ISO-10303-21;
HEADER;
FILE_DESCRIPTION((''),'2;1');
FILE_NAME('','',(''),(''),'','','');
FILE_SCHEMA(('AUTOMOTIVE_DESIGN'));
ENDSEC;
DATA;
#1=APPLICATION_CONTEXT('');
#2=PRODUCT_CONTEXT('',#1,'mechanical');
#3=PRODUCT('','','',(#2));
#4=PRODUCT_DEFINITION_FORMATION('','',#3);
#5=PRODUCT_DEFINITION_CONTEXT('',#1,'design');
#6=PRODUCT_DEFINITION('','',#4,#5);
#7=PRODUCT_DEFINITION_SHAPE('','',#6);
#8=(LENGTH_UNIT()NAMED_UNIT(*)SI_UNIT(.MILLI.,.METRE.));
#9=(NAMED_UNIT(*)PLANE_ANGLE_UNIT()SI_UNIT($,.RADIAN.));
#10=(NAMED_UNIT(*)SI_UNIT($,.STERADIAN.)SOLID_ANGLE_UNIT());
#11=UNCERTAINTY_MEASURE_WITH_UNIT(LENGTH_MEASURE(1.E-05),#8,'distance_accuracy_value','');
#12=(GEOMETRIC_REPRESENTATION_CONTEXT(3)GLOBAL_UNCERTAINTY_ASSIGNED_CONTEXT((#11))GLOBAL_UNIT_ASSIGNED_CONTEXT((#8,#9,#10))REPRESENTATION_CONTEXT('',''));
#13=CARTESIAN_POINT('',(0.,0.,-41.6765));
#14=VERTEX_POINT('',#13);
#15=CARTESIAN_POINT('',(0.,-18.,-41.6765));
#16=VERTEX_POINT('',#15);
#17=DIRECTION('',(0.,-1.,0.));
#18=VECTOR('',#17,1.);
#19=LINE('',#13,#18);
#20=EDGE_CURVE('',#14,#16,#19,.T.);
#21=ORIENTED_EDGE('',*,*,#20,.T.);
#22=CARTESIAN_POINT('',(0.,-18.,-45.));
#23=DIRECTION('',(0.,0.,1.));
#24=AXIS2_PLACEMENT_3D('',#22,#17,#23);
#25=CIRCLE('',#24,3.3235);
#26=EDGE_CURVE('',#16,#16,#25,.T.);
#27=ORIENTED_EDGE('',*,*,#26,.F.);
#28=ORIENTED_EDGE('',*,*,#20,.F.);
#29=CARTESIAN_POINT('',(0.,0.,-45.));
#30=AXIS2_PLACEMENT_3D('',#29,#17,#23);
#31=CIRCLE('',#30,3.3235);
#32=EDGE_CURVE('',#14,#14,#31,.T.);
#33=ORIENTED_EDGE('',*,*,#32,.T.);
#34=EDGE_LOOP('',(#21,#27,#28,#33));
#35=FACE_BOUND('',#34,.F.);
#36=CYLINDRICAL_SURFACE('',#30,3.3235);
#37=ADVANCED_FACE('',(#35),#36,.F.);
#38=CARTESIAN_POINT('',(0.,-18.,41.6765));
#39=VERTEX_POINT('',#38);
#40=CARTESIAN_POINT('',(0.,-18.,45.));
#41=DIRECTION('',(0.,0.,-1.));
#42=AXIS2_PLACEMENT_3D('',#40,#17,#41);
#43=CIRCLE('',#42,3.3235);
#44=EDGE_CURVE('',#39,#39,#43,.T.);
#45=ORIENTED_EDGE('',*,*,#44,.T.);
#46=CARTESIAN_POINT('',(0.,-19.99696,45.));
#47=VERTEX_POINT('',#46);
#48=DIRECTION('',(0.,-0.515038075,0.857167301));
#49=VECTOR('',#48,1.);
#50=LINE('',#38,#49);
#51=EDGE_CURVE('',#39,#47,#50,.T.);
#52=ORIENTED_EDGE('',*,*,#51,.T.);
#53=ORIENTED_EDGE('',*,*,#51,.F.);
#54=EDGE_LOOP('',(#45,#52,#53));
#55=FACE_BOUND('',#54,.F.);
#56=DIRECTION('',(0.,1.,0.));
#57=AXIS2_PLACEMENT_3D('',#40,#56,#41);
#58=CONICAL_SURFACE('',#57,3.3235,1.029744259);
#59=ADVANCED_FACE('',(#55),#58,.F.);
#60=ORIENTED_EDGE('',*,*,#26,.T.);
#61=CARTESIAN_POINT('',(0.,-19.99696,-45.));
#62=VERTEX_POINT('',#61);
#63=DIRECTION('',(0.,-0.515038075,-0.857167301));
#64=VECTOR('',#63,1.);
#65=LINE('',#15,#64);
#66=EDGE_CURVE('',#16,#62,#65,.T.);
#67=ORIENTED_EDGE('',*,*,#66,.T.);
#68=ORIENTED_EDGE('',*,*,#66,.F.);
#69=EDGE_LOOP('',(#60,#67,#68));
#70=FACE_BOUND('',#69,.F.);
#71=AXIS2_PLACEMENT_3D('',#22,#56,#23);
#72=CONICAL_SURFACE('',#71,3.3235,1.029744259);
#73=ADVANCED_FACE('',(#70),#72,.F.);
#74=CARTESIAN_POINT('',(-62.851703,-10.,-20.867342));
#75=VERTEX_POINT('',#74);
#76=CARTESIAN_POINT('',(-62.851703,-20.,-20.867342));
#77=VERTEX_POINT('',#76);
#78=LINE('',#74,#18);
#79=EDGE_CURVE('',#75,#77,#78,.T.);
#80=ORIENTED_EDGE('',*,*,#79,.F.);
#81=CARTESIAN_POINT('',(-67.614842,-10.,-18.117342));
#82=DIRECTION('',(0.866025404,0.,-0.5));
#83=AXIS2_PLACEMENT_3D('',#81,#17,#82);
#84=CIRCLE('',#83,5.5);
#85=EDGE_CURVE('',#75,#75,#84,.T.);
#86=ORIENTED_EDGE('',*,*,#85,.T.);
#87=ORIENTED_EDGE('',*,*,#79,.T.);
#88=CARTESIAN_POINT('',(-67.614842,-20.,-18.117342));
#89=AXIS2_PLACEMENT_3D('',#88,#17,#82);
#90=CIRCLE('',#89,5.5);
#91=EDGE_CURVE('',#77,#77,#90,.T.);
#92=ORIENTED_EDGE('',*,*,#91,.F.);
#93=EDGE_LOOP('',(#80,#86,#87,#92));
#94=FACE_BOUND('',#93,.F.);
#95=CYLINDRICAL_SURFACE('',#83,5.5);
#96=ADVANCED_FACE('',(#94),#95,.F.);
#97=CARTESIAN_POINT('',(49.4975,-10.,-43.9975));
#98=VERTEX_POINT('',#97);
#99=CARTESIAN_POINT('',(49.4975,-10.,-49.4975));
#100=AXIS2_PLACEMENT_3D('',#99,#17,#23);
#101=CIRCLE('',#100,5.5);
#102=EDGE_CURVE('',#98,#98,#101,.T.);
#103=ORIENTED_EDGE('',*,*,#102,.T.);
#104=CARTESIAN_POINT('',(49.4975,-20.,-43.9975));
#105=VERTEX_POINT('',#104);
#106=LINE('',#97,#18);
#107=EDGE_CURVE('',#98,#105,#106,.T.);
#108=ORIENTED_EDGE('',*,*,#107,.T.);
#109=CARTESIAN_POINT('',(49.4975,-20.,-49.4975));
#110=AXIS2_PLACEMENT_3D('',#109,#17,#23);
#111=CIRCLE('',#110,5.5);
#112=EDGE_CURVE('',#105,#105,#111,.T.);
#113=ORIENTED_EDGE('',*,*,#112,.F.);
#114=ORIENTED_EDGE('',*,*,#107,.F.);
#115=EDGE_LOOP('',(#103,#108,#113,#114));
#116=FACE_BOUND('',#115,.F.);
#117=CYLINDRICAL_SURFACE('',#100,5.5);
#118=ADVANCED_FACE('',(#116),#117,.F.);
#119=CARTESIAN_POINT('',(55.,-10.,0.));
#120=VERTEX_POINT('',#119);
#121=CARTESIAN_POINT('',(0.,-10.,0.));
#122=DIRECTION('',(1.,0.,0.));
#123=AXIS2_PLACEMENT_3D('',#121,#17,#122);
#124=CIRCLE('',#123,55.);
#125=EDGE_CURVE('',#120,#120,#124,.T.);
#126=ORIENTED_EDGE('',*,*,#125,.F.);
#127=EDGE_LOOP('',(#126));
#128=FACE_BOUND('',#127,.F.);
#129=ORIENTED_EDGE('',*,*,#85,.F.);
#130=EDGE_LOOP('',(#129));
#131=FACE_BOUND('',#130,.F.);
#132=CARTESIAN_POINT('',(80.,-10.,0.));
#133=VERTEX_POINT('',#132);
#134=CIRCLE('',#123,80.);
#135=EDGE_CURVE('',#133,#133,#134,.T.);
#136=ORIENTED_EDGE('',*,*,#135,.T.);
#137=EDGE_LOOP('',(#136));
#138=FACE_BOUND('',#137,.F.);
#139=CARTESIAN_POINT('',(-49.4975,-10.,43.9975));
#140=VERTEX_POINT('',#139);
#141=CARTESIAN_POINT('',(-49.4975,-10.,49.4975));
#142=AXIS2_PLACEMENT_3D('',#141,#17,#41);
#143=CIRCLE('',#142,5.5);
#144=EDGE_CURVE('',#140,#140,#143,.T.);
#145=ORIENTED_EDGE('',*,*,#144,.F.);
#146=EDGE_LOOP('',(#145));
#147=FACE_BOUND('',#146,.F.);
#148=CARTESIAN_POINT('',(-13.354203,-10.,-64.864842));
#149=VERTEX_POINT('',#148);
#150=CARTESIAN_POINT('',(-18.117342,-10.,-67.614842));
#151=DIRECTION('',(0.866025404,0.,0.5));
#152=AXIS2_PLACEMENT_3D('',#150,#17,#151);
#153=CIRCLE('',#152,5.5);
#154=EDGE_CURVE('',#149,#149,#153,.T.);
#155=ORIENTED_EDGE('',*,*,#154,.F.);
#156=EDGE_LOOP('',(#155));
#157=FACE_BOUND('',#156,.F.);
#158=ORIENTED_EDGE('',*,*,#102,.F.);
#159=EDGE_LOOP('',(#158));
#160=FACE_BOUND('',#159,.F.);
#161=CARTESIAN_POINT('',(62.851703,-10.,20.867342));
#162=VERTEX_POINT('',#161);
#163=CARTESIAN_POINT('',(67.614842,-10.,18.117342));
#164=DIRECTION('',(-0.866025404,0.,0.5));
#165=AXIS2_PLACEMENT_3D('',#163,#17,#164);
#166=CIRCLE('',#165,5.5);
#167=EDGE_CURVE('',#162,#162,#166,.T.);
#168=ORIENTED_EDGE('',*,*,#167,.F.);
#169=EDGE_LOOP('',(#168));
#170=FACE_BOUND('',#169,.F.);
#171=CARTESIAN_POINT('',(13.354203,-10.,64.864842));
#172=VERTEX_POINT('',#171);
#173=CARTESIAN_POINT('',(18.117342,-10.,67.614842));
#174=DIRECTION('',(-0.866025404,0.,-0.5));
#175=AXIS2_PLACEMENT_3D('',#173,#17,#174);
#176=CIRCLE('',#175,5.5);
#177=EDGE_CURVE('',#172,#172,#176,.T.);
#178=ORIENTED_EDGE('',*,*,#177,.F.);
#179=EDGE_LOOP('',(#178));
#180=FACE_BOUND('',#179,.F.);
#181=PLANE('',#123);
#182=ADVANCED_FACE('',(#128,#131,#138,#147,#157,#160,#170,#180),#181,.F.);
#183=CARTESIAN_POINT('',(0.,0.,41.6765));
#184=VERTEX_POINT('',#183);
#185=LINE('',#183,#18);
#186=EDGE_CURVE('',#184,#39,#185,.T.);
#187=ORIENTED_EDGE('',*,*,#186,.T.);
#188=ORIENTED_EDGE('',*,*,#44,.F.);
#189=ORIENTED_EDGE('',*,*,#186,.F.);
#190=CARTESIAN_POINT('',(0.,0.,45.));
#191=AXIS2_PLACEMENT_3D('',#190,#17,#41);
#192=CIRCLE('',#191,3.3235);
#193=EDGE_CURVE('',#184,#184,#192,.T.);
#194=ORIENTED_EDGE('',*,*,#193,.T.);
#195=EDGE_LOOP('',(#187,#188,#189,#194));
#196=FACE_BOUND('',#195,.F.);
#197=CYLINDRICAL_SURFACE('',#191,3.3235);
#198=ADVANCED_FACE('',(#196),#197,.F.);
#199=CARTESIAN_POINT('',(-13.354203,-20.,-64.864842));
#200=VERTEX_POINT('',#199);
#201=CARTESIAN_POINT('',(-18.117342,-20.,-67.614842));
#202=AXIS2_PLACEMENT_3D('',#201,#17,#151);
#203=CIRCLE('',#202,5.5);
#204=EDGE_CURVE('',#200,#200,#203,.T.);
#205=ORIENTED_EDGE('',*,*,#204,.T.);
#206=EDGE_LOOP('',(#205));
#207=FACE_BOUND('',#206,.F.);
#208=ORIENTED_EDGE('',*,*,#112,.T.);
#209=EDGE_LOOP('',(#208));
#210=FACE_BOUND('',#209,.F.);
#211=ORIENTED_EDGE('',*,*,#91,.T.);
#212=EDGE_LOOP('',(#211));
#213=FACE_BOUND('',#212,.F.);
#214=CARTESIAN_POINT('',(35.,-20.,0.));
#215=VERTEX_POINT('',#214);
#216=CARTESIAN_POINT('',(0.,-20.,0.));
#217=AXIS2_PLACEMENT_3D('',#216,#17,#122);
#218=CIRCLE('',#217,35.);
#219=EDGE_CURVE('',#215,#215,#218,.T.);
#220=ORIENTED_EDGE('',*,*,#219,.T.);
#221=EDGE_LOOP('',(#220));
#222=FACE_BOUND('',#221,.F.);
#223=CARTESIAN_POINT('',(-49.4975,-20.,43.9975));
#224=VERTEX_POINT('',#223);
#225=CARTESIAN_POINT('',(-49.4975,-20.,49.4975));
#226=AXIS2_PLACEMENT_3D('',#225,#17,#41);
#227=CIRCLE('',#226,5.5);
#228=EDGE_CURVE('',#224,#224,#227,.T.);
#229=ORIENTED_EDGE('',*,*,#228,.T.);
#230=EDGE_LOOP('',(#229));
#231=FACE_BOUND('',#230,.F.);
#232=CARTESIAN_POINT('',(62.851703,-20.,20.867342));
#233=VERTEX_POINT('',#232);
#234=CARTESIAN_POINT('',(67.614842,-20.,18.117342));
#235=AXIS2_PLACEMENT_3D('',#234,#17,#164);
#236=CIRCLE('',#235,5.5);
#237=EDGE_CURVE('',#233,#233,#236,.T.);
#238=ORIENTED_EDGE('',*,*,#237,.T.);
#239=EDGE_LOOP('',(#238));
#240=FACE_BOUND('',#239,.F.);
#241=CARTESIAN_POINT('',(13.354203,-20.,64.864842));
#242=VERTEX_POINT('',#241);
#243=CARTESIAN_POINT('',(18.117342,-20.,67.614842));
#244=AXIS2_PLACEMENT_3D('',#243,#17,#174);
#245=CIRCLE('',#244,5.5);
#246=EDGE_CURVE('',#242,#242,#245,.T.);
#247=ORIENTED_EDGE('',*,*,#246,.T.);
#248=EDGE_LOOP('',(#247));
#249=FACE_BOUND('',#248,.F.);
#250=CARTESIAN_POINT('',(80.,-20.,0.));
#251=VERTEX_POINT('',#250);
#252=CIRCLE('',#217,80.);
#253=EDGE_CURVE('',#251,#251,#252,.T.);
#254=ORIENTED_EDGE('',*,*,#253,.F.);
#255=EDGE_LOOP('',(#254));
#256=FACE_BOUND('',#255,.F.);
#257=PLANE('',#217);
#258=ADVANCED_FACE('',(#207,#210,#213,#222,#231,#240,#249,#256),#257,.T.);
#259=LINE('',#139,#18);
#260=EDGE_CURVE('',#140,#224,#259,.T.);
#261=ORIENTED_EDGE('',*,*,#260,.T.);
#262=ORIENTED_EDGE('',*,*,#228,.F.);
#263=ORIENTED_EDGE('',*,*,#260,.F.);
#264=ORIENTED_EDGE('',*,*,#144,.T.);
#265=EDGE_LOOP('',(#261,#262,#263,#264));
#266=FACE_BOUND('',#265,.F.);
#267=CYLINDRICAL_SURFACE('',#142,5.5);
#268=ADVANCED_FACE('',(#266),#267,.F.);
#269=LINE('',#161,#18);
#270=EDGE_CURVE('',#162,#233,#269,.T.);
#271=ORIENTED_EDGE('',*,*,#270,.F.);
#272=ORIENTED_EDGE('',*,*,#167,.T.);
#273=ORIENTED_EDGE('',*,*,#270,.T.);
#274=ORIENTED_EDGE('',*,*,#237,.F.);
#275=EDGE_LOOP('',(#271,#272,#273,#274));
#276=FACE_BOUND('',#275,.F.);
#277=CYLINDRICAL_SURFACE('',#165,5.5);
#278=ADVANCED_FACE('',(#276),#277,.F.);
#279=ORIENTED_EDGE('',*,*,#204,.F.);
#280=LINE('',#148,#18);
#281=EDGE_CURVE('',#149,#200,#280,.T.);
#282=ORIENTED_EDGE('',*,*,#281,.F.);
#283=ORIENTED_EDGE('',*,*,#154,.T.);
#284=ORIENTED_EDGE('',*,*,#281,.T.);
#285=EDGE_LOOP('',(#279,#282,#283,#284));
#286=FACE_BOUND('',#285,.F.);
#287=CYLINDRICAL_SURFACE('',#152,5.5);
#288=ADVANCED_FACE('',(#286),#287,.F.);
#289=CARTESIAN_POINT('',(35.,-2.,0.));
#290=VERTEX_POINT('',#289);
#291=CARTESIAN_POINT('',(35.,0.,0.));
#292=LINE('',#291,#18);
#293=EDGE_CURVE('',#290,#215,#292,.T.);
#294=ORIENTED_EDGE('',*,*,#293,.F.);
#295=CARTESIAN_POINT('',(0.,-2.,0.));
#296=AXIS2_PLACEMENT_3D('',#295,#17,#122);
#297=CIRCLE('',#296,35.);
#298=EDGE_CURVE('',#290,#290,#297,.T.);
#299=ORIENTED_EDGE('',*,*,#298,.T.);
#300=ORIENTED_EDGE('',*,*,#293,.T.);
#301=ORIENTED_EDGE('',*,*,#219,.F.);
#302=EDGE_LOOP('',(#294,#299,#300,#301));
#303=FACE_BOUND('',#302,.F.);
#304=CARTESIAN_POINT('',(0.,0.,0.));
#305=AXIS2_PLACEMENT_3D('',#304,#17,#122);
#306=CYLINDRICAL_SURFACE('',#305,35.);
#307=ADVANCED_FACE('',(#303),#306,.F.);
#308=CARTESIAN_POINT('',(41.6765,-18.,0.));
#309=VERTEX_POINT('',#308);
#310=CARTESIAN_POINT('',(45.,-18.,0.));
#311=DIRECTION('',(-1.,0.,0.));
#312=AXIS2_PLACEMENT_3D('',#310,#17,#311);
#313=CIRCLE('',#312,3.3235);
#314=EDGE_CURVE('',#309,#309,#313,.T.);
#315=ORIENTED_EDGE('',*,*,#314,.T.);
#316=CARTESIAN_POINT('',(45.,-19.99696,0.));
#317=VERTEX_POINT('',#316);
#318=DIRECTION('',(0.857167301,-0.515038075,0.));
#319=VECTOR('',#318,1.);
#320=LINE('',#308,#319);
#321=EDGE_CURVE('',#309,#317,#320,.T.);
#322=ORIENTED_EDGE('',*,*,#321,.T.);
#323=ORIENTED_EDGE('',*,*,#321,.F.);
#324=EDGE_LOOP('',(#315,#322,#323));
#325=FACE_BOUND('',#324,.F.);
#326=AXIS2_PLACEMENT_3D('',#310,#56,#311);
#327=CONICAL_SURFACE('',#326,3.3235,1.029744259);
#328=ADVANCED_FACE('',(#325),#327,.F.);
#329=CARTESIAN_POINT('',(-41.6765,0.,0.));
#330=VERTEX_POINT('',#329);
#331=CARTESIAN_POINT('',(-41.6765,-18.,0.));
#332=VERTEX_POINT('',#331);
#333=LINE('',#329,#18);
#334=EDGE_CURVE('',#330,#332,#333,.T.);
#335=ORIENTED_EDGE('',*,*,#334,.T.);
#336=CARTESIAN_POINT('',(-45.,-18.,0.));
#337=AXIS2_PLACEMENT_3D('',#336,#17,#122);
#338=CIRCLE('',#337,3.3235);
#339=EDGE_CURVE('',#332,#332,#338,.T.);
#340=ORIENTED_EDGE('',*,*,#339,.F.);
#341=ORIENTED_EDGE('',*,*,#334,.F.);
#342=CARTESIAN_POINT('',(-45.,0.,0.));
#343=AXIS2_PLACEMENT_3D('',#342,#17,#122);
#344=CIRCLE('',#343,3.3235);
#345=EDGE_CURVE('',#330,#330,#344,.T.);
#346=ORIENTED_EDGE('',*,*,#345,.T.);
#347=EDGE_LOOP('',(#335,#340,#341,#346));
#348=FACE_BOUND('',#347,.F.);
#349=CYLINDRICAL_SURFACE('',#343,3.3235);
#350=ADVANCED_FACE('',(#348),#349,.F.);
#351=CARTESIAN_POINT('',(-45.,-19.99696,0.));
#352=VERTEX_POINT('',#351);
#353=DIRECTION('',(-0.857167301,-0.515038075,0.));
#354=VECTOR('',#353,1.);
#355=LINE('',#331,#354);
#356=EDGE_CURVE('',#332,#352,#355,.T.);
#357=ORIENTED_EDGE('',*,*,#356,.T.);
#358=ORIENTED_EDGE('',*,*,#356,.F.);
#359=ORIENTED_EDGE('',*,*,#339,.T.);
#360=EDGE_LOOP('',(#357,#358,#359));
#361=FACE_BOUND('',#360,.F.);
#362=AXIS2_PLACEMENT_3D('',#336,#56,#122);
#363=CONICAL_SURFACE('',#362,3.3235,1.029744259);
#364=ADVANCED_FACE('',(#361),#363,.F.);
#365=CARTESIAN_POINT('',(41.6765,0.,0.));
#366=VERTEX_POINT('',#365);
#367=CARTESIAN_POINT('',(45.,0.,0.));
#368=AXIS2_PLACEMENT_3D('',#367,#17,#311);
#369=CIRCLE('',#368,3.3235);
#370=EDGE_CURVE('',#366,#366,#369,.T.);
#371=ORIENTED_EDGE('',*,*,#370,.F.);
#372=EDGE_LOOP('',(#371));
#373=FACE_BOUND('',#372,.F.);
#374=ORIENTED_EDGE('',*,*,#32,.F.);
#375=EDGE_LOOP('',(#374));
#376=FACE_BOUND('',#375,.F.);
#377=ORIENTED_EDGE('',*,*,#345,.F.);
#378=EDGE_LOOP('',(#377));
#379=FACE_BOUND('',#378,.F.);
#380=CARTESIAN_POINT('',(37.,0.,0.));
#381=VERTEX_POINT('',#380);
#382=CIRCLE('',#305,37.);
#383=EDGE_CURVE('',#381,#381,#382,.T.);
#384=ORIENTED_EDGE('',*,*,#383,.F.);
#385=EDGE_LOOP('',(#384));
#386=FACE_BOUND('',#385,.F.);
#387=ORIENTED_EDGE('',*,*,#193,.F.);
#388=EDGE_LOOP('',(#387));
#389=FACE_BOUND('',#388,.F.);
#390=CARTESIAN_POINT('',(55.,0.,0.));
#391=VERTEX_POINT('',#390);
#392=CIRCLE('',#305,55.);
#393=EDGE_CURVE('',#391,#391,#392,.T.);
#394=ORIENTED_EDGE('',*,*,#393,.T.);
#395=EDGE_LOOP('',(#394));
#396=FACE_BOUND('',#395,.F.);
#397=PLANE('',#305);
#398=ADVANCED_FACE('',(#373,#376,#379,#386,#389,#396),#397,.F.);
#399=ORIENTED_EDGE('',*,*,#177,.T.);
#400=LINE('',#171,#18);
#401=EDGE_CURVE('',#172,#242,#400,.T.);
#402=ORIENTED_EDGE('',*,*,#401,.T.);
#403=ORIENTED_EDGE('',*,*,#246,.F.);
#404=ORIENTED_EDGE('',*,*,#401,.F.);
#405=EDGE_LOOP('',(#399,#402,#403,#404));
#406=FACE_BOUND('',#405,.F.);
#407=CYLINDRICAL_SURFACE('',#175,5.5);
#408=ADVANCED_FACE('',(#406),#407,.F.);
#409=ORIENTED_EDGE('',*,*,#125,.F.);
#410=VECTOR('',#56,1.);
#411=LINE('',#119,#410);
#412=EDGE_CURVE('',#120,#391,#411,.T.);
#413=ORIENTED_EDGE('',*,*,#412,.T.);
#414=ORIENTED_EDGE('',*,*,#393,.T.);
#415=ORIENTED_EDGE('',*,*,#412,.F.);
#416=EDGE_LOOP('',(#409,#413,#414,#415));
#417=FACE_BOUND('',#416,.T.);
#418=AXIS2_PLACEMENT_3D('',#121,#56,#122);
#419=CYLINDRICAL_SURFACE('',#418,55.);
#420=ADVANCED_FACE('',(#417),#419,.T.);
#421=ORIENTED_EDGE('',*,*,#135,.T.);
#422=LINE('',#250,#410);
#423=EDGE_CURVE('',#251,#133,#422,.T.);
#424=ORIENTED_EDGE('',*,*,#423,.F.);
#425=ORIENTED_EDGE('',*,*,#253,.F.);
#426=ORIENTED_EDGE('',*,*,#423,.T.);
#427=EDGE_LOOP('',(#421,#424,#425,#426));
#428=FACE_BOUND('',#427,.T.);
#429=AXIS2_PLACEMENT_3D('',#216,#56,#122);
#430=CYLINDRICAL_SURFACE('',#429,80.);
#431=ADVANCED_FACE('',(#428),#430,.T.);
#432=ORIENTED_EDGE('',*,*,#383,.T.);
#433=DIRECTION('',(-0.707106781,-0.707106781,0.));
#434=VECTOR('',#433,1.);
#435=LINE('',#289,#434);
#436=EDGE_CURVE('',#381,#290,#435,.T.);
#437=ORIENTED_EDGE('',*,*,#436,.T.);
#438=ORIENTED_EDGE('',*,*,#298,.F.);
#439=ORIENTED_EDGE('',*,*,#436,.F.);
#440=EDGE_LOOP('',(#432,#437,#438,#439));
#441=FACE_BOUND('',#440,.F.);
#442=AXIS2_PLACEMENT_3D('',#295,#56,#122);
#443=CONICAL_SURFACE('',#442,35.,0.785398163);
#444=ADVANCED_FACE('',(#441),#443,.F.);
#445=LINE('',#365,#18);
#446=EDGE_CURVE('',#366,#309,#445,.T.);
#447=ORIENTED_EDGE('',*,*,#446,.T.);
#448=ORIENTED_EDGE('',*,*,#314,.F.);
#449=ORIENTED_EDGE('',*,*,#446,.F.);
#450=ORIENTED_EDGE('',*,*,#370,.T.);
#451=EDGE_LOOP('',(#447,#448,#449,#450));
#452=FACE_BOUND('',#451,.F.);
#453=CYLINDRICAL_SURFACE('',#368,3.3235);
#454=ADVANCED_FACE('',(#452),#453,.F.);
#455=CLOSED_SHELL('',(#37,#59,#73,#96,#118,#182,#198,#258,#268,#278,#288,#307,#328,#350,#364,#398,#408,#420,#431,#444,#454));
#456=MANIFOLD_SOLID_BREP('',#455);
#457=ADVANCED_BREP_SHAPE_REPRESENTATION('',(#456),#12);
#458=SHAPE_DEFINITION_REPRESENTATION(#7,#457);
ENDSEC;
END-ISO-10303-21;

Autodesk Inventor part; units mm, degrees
ref_plane "YZ Plane" through (0, 0, 0) normal (1, 0, 0) x (0, 1, 0)
ref_plane "XZ Plane" through (0, 0, 0) normal (0, 1, 0) x (-1, 0, 0)
ref_plane "XY Plane" through (0, 0, 0) normal (0, 0, 1) x (1, 0, 0)
sketch "Эскиз1" plane through (0, 0, 0) normal (0, 0, 1) x (1, 0, 0)
  line L0 (0, 0) -> (0, -30.9602)
  line L1 (35, 0) -> (35, -20)
  line L2 (35, -20) -> (80, -20)
  line L3 (80, -20) -> (80, -10)
  line L4 (80, -10) -> (55, -10)
  line L5 (55, -10) -> (55, 0)
  line L6 (55, 0) -> (35, 0)
  dimension "d0" = 70
  dimension "d1" = 110
  dimension "diam_out_plate" = 160
  dimension "d3" = 20
  dimension "d4" = 10
revolve "Вращение1" add sketch "Эскиз1" angle 360 about axis through (0, 0, 0) along (0, -1, 0)
sketch "Эскиз2" plane through (0, 0, 0) normal (0, 1, 0) x (1, 0, 0)
  circle A0 centre (0, 0) radius 35 projected
  circle A1 centre (0, 0) radius 55 projected
  point P0 (0, 45)
  dimension "d6" = 45
hole "Отверстие1" at (0, 0, -45) direction (0, -1, 0) diameter 6.647 depth 18 tip angle 118 thread size "M8x1.25" class "6H" standard "ISO Metric profile"
pattern_circular "Круговой массив1" count 4 over 360 about axis through (0, -10, 0) along (0, -1, 0) of "Отверстие1"
sketch "Эскиз3" plane through (0, -10, 0) normal (0, 1, 0) x (1, 0, 0)
  circle A0 centre (0, 0) radius 55 projected
  circle A1 centre (0, 0) radius 80 projected
  circle A2 centre (0, 0) radius 80 projected
  line L0 (0, 80) -> (0, 0)
  line L1 (0, 0) -> (49.4975, 49.4975) construction
  dimension "d17" = 70
  dimension "d18" = 45
hole "Отверстие2" at (49.4975, -10, -49.4975) direction (0, -1, 0) diameter 11 end through all
pattern_circular "Круговой массив2" count 6 over 360 about axis through (0, -10, 0) along (0, -1, 0) of "Отверстие2"
chamfer "Фаска2" distance 2 angle 45 1 edges at (-35, 0, 0)
properties part number "плашка"
